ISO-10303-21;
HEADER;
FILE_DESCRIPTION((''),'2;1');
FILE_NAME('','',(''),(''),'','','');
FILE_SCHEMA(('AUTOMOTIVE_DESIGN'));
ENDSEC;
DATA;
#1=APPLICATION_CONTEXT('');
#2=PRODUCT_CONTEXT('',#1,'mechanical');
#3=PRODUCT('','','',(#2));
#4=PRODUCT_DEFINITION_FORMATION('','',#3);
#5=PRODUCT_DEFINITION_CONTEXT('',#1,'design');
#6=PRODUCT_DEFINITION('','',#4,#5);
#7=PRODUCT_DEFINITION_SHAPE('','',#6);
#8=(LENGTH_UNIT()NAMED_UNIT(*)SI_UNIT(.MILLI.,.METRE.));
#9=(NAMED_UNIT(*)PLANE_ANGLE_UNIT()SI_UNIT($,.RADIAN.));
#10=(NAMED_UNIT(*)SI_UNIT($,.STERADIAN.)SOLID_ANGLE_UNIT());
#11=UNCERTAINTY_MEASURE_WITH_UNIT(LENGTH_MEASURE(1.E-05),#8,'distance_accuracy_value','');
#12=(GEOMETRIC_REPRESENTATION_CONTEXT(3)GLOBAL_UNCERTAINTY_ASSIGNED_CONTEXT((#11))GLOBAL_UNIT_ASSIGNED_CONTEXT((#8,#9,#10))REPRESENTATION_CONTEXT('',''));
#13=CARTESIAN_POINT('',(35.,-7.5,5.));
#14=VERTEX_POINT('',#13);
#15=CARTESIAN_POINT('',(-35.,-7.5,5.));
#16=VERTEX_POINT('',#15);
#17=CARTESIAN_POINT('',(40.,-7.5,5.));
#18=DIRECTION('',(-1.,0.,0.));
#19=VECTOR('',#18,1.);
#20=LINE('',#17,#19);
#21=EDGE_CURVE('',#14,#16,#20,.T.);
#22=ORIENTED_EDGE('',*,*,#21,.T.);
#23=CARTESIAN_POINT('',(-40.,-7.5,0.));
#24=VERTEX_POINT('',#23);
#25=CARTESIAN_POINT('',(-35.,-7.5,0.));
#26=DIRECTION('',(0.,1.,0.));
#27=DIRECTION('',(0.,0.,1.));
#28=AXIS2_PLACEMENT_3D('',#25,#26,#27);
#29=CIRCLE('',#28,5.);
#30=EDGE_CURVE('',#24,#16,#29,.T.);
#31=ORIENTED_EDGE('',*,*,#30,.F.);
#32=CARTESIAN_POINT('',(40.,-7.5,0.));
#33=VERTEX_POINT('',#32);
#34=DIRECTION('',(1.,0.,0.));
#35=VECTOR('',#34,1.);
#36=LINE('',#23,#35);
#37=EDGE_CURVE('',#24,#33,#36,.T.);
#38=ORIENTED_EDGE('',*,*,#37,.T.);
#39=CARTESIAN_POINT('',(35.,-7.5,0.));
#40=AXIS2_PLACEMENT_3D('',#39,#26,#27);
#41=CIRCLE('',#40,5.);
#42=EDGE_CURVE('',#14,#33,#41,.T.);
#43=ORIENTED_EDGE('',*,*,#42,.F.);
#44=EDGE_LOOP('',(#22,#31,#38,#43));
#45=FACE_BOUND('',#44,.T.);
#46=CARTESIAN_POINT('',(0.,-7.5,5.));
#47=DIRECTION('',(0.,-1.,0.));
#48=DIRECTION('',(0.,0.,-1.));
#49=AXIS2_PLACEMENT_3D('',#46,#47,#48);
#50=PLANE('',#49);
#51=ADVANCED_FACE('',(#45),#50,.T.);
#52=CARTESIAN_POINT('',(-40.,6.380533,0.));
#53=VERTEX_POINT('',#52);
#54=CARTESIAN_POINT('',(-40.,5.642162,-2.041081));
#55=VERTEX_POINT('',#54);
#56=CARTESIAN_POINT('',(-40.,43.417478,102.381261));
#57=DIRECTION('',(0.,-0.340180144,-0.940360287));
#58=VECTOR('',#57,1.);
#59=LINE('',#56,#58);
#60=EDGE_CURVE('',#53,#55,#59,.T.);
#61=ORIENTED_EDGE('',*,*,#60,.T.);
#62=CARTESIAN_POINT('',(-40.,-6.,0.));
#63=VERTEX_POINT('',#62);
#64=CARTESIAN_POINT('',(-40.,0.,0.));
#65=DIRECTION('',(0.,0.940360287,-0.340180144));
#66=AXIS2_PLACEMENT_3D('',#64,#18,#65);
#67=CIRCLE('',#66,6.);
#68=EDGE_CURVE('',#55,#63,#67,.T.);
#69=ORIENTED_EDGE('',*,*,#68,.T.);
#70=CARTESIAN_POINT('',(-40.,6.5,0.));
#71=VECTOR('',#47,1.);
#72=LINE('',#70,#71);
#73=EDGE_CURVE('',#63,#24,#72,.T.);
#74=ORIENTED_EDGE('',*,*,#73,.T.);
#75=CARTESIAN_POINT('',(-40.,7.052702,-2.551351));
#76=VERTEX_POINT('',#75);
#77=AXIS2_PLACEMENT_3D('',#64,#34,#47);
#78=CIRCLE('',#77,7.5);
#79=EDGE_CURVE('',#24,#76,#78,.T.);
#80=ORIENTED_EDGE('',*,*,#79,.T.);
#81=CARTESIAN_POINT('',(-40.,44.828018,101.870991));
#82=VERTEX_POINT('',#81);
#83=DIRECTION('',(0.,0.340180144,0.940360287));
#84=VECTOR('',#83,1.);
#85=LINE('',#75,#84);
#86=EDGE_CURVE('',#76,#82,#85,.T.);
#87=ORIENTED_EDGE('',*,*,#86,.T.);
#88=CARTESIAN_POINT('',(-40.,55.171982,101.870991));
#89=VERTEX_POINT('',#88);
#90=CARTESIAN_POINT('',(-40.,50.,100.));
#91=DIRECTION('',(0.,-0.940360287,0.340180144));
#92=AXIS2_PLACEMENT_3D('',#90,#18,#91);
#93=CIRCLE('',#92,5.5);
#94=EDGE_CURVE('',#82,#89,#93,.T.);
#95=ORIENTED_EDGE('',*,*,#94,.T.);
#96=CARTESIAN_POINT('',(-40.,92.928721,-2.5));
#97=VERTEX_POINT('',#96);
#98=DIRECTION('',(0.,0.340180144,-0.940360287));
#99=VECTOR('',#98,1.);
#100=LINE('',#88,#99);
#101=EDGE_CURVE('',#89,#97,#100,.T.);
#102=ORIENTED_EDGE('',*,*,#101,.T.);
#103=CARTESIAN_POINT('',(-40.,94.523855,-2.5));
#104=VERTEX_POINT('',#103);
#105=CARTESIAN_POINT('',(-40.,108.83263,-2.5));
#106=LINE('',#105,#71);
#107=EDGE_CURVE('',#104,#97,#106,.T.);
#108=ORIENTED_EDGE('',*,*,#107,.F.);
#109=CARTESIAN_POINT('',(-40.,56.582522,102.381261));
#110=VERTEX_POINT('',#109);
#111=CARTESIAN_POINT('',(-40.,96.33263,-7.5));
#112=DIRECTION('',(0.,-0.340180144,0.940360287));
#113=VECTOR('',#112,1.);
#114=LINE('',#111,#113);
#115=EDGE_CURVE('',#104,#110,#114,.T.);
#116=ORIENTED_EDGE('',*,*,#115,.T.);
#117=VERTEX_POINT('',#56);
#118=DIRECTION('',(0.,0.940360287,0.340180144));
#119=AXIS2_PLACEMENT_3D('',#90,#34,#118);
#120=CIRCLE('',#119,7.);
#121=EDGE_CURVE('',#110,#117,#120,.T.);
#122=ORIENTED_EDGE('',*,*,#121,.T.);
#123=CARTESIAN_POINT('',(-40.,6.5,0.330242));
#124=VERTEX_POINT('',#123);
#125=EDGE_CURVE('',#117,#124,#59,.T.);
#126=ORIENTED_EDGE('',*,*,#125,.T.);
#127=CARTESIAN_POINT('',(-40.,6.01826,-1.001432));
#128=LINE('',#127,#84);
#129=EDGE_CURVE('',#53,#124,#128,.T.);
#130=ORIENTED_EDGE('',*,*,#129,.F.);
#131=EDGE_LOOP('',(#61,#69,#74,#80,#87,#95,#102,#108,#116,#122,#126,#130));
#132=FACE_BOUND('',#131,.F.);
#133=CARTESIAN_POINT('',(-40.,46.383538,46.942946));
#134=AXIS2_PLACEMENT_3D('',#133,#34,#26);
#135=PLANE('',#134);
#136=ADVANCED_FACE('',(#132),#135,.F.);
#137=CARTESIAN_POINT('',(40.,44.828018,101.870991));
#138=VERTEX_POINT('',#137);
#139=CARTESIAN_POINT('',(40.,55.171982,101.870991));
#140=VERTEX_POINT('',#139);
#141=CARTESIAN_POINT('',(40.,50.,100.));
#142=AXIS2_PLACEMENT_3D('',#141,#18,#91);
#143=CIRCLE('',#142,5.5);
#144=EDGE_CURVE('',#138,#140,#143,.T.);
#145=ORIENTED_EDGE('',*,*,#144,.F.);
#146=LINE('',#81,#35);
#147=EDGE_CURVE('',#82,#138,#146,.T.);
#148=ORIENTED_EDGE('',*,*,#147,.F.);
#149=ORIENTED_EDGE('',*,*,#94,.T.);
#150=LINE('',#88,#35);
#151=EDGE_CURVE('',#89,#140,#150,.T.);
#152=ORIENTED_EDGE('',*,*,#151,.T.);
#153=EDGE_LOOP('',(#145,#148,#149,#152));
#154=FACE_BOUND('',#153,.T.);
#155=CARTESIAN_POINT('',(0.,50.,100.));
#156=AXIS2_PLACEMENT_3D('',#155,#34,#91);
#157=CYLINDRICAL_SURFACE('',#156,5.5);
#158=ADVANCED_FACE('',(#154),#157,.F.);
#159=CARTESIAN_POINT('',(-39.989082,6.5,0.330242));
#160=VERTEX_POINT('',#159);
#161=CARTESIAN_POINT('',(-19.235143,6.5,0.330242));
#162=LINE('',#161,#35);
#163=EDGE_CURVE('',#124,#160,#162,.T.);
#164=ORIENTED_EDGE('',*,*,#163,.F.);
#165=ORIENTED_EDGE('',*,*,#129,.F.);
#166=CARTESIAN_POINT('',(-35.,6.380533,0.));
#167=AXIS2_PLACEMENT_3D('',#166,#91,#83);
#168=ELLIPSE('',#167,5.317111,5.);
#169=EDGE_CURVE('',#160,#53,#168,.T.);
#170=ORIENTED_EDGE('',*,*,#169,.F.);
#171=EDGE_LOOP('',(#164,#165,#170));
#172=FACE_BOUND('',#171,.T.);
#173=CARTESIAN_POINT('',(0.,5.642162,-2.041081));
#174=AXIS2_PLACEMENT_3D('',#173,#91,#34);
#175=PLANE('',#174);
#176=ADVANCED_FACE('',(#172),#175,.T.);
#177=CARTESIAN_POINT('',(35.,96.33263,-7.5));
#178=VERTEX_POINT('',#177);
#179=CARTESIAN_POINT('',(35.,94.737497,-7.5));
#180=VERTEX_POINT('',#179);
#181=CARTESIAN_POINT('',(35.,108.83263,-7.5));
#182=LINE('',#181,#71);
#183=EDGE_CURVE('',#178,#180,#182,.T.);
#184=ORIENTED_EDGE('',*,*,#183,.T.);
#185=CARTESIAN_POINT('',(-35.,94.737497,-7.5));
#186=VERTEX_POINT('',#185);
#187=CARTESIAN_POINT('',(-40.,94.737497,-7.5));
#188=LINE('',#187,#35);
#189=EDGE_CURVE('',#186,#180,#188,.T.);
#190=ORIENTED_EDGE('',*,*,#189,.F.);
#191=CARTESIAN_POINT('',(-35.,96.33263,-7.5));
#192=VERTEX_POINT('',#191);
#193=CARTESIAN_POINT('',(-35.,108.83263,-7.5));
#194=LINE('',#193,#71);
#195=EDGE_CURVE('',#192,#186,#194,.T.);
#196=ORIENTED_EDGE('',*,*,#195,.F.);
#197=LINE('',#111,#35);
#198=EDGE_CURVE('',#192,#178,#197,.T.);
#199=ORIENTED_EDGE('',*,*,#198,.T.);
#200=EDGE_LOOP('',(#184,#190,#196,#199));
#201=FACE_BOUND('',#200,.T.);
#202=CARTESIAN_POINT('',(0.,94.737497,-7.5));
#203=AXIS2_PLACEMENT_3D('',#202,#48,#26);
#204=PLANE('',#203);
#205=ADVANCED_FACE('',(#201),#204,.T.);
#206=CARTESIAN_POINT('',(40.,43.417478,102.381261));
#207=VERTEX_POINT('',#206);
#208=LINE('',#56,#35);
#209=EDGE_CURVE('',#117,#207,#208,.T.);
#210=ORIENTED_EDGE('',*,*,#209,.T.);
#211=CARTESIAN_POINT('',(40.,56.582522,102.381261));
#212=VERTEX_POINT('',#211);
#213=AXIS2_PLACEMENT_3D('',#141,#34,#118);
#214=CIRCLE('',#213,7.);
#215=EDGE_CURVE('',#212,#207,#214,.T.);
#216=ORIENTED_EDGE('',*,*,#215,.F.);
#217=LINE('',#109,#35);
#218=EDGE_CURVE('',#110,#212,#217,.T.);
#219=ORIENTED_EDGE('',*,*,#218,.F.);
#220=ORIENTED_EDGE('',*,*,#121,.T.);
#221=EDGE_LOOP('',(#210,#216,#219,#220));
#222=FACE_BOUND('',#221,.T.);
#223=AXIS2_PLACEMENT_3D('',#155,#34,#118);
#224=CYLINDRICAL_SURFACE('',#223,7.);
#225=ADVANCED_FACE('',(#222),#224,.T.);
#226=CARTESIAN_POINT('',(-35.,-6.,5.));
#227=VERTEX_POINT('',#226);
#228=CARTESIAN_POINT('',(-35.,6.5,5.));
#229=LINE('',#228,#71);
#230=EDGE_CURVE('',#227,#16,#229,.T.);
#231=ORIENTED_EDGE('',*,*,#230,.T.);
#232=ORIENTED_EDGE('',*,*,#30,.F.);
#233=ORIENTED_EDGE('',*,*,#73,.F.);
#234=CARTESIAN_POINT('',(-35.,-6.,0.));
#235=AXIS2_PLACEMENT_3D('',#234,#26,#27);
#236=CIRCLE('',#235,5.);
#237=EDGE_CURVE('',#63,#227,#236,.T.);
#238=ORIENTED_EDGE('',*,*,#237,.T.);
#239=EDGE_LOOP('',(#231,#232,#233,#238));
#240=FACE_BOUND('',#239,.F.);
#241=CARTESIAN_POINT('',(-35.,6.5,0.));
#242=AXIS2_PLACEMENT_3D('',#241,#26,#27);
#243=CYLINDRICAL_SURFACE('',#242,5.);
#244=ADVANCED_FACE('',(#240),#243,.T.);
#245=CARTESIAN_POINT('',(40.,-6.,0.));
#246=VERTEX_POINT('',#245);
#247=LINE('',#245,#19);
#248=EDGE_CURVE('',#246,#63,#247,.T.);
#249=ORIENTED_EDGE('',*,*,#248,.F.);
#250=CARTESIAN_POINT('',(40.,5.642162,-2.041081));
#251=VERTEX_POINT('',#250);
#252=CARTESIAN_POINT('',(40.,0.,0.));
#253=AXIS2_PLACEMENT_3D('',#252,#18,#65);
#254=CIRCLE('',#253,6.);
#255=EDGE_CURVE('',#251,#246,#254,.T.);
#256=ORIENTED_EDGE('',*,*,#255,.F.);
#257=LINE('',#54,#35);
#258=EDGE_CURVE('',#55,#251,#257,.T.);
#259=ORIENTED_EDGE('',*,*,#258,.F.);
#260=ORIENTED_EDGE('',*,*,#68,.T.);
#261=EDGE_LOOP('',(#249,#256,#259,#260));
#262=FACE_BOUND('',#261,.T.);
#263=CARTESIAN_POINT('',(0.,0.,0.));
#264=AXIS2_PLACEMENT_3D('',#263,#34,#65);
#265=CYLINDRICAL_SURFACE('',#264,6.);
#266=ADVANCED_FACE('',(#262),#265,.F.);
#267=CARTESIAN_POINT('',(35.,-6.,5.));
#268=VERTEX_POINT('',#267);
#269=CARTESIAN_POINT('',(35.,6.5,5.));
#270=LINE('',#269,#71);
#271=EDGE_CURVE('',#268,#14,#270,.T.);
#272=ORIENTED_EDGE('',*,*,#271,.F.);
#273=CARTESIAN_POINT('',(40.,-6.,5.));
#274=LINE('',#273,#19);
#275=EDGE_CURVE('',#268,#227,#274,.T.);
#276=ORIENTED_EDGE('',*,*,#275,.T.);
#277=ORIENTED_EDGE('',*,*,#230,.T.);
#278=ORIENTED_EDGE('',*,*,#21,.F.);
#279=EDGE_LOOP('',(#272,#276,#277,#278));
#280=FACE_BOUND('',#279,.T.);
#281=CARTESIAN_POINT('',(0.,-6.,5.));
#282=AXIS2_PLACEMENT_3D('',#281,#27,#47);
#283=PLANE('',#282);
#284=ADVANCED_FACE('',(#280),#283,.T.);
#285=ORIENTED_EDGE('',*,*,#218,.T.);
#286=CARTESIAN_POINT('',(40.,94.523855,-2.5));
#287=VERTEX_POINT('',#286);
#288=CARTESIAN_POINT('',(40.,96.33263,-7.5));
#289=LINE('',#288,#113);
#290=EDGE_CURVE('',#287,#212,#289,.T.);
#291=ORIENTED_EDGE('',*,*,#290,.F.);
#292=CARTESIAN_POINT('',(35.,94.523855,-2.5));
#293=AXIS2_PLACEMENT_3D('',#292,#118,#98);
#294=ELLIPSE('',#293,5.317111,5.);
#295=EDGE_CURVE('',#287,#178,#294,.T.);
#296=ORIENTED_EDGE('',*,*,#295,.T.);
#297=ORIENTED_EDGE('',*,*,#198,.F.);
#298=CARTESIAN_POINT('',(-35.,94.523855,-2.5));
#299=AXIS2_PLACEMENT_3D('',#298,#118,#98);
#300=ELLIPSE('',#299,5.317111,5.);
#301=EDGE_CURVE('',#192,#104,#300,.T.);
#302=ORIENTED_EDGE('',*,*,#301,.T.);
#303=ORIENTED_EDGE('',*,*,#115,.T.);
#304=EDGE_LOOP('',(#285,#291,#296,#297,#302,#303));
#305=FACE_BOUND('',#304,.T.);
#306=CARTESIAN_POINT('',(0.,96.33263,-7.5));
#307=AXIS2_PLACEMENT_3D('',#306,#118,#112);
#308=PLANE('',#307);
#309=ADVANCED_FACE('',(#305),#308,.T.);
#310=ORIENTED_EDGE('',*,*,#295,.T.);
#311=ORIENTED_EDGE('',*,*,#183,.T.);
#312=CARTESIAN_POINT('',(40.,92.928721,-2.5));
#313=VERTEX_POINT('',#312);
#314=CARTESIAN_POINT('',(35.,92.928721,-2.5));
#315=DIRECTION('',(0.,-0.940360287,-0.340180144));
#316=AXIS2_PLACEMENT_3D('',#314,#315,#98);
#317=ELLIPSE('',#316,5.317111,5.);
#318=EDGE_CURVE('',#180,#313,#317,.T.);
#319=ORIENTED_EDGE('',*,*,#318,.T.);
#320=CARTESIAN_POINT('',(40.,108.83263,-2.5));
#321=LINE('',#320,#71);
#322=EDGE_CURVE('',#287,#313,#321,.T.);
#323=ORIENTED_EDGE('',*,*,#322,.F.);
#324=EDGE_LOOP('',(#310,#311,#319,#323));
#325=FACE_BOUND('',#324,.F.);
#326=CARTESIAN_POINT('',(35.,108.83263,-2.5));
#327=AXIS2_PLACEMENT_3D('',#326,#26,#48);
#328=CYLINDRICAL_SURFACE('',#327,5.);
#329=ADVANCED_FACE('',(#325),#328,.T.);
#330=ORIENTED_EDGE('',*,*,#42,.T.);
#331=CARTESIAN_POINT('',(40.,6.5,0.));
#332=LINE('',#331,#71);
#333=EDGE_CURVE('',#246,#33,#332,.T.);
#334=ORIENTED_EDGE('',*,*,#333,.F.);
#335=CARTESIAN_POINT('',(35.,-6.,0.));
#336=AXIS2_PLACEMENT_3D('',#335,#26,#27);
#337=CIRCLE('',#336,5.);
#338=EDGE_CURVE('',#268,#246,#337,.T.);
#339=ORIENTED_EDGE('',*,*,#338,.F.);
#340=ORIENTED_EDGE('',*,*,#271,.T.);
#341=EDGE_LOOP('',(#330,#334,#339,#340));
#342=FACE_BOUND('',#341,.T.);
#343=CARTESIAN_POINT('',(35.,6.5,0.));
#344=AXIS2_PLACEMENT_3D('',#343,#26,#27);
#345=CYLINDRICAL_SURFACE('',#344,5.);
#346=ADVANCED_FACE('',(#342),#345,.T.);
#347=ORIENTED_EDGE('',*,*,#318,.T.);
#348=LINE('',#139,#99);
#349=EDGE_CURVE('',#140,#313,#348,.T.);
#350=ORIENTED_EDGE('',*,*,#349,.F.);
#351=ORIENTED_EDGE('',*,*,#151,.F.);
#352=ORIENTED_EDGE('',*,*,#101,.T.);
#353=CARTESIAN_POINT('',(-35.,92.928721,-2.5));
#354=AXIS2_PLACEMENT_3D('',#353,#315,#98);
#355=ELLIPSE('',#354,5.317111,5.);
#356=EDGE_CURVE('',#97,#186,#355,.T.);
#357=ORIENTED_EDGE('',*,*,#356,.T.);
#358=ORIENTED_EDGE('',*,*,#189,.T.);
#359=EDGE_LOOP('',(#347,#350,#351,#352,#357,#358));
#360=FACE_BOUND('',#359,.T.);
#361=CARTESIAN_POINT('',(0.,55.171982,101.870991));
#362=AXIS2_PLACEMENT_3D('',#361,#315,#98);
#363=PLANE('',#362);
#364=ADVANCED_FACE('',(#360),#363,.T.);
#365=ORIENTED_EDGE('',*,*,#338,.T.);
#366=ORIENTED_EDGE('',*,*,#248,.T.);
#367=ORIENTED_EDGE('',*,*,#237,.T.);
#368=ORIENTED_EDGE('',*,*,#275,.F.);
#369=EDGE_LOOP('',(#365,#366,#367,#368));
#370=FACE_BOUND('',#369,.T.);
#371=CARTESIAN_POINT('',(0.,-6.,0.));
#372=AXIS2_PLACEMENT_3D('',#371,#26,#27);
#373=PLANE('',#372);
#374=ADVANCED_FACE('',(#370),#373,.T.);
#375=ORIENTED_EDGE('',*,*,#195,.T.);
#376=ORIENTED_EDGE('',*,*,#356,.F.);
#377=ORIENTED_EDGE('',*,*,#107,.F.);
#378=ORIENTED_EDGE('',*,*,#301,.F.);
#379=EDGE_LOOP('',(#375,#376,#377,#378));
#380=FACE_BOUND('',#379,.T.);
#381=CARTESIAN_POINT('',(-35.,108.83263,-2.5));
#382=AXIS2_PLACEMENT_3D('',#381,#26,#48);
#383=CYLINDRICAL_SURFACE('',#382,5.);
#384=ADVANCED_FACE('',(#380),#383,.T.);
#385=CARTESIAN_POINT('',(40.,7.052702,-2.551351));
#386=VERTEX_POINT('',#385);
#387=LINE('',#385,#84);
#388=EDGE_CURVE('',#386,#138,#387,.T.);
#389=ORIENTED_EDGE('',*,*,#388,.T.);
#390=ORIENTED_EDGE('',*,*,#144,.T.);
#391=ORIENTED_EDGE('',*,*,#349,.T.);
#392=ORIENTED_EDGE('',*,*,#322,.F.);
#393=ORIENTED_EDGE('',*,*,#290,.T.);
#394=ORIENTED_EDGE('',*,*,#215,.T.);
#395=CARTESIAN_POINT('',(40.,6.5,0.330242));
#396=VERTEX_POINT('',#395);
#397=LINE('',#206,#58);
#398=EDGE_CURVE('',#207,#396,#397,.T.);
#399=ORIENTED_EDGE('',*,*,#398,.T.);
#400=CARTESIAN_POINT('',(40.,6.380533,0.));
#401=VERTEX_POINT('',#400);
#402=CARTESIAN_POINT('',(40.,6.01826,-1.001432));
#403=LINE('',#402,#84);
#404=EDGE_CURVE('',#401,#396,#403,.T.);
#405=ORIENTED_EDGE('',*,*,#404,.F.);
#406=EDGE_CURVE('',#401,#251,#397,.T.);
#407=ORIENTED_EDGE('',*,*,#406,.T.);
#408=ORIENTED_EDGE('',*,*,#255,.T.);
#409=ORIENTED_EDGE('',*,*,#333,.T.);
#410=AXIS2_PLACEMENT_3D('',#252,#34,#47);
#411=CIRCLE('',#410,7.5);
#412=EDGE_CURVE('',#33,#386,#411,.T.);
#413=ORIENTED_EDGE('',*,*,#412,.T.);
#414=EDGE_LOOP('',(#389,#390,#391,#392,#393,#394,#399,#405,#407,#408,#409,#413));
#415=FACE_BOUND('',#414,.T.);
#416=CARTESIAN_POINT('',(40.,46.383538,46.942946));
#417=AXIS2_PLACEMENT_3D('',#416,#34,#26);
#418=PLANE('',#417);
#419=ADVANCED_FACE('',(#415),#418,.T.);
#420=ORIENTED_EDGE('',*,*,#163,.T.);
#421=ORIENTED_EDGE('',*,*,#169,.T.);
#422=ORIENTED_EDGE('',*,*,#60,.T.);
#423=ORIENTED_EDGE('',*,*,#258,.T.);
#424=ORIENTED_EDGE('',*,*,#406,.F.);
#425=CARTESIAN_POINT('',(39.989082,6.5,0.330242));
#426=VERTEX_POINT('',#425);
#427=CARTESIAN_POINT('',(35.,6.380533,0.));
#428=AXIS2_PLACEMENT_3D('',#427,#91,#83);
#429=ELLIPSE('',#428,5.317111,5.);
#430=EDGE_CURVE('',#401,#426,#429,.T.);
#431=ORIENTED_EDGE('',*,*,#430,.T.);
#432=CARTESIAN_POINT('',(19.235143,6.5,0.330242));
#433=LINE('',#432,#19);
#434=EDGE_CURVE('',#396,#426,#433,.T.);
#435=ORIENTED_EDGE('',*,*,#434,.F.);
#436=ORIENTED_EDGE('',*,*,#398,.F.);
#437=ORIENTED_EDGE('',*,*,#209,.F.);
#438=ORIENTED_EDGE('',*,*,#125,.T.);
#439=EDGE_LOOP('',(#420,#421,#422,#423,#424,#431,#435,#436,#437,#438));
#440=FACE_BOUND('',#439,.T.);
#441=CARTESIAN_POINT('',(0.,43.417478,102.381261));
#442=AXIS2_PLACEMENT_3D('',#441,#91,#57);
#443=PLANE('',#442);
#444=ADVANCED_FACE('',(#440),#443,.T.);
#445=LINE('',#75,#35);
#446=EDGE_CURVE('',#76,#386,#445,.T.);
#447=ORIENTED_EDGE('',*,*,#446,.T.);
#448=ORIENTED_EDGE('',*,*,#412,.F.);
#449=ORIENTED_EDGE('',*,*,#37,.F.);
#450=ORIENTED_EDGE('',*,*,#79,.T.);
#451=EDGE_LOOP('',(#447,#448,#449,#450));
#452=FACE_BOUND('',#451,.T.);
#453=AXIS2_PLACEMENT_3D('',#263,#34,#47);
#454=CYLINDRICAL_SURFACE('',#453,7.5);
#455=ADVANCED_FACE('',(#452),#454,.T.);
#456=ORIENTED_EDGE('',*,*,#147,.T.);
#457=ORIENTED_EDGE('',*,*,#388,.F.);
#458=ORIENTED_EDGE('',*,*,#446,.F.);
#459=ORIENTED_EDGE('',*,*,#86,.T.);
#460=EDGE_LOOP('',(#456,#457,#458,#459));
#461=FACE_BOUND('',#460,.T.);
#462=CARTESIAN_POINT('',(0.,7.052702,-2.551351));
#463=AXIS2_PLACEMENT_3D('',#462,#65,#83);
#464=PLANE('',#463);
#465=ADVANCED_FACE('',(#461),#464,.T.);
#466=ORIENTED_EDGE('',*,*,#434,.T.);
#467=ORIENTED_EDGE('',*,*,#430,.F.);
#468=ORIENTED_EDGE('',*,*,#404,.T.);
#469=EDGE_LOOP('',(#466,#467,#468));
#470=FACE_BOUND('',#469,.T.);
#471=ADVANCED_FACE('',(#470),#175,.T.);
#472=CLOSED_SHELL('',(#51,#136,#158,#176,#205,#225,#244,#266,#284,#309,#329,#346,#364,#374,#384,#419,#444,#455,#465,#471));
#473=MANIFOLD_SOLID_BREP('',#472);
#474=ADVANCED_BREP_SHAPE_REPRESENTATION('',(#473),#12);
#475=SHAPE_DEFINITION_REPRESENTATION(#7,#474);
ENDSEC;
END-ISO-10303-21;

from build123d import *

# Parameters (mm, degrees)
F1_DEPTH     = 40
F2_T1_DEPTH  = 26.5951332913
F2_T6_DEPTH  = 26.5
F2_T11_DEPTH = 26.5


# Not quite as in the source:
# - a fillet or chamfer that OpenCascade refuses, or shapes differently, is made with other operations: its cross-section is extruded or revolved along the edge and cut away or added


with BuildPart() as f1:
    # F0 (on Right) → F1 (new body, symmetric)
    with BuildSketch(Plane.YZ):
        with BuildLine():
            Line((-7.5, 5), (-7.5, 0))
            ThreePointArc((-7.5, 0), (-1.2951320089, -7.3873292251), (7.0527021545, -2.5513510773))
            Line((7.0527021545, -2.5513510773), (44.82801842, 101.87099079))
            ThreePointArc((44.82801842, 101.87099079), (50, 105.5), (55.17198158, 101.87099079))
            Line((55.17198158, 101.87099079), (94.7374969044, -7.5))
            Line((94.7374969044, -7.5), (96.3326301957, -7.5))
            Line((96.3326301957, -7.5), (56.5825220109, 102.3812610054))
            ThreePointArc((56.5825220109, 102.3812610054), (50, 107), (43.4174779891, 102.3812610054))
            Line((43.4174779891, 102.3812610054), (5.6421617236, -2.0410808618))
            ThreePointArc((5.6421617236, -2.0410808618), (-1.0361056071, -5.9098633801), (-6, 0))
            Line((-6, 0), (-6, 5))
            Line((-6, 5), (-7.5, 5))
        make_face()
    extrude(amount=F1_DEPTH, both=True)

    # F2: fillet of radius 5 on 4 edges, made by hand

    # F2_s2 → F2_t1 (cut)
    with BuildSketch(Plane.XZ.offset(-108.8326301957)):
        with BuildLine():
            ThreePointArc((-35, -7.5), (-38.5355339059, -6.0355339059), (-40, -2.5))
            Line((-40, -2.5), (-40, -7.5))
            Line((-40, -7.5), (-35, -7.5))
        make_face()
        with BuildLine():
            ThreePointArc((35, -7.5), (38.5355339059, -6.0355339059), (40, -2.5))
            Line((40, -2.5), (40, -7.5))
            Line((40, -7.5), (35, -7.5))
        make_face()
    extrude(amount=F2_T1_DEPTH, mode=Mode.SUBTRACT)


with BuildPart() as f2_tool4:
    # F2_s5 → F2_t6 (new body)
    with BuildSketch(Plane.XZ.offset(-6.5)):
        with BuildLine():
            ThreePointArc((35, 5), (38.5355339059, 3.5355339059), (40, 0))
            Line((40, 0), (40, 5))
            Line((40, 5), (35, 5))
        make_face()
    extrude(amount=F2_T6_DEPTH)

    split(bisect_by=Plane(origin=(0, 5.6421617236, -2.0410808618), x_dir=(1, 0, 0), z_dir=(0, -0.9403602873, 0.3401801436)), keep=Keep.TOP)


with BuildPart() as f1_1:
    add(f1.part)

    # F2_t3: cut F2_tool4
    add(f2_tool4.part, mode=Mode.SUBTRACT)


with BuildPart() as f2_tool9:
    # F2_s10 → F2_t11 (new body)
    with BuildSketch(Plane.XZ.offset(-6.5)):
        with BuildLine():
            ThreePointArc((-35, 5), (-38.5355339059, 3.5355339059), (-40, 0))
            Line((-40, 0), (-40, 5))
            Line((-40, 5), (-35, 5))
        make_face()
    extrude(amount=F2_T11_DEPTH)

    split(bisect_by=Plane(origin=(0, 5.6421617236, -2.0410808618), x_dir=(1, 0, 0), z_dir=(0, -0.9403602873, 0.3401801436)), keep=Keep.TOP)


with BuildPart() as f1_2:
    add(f1_1.part)

    # F2_t8: cut F2_tool9
    add(f2_tool9.part, mode=Mode.SUBTRACT)


solid = f1_2.part
